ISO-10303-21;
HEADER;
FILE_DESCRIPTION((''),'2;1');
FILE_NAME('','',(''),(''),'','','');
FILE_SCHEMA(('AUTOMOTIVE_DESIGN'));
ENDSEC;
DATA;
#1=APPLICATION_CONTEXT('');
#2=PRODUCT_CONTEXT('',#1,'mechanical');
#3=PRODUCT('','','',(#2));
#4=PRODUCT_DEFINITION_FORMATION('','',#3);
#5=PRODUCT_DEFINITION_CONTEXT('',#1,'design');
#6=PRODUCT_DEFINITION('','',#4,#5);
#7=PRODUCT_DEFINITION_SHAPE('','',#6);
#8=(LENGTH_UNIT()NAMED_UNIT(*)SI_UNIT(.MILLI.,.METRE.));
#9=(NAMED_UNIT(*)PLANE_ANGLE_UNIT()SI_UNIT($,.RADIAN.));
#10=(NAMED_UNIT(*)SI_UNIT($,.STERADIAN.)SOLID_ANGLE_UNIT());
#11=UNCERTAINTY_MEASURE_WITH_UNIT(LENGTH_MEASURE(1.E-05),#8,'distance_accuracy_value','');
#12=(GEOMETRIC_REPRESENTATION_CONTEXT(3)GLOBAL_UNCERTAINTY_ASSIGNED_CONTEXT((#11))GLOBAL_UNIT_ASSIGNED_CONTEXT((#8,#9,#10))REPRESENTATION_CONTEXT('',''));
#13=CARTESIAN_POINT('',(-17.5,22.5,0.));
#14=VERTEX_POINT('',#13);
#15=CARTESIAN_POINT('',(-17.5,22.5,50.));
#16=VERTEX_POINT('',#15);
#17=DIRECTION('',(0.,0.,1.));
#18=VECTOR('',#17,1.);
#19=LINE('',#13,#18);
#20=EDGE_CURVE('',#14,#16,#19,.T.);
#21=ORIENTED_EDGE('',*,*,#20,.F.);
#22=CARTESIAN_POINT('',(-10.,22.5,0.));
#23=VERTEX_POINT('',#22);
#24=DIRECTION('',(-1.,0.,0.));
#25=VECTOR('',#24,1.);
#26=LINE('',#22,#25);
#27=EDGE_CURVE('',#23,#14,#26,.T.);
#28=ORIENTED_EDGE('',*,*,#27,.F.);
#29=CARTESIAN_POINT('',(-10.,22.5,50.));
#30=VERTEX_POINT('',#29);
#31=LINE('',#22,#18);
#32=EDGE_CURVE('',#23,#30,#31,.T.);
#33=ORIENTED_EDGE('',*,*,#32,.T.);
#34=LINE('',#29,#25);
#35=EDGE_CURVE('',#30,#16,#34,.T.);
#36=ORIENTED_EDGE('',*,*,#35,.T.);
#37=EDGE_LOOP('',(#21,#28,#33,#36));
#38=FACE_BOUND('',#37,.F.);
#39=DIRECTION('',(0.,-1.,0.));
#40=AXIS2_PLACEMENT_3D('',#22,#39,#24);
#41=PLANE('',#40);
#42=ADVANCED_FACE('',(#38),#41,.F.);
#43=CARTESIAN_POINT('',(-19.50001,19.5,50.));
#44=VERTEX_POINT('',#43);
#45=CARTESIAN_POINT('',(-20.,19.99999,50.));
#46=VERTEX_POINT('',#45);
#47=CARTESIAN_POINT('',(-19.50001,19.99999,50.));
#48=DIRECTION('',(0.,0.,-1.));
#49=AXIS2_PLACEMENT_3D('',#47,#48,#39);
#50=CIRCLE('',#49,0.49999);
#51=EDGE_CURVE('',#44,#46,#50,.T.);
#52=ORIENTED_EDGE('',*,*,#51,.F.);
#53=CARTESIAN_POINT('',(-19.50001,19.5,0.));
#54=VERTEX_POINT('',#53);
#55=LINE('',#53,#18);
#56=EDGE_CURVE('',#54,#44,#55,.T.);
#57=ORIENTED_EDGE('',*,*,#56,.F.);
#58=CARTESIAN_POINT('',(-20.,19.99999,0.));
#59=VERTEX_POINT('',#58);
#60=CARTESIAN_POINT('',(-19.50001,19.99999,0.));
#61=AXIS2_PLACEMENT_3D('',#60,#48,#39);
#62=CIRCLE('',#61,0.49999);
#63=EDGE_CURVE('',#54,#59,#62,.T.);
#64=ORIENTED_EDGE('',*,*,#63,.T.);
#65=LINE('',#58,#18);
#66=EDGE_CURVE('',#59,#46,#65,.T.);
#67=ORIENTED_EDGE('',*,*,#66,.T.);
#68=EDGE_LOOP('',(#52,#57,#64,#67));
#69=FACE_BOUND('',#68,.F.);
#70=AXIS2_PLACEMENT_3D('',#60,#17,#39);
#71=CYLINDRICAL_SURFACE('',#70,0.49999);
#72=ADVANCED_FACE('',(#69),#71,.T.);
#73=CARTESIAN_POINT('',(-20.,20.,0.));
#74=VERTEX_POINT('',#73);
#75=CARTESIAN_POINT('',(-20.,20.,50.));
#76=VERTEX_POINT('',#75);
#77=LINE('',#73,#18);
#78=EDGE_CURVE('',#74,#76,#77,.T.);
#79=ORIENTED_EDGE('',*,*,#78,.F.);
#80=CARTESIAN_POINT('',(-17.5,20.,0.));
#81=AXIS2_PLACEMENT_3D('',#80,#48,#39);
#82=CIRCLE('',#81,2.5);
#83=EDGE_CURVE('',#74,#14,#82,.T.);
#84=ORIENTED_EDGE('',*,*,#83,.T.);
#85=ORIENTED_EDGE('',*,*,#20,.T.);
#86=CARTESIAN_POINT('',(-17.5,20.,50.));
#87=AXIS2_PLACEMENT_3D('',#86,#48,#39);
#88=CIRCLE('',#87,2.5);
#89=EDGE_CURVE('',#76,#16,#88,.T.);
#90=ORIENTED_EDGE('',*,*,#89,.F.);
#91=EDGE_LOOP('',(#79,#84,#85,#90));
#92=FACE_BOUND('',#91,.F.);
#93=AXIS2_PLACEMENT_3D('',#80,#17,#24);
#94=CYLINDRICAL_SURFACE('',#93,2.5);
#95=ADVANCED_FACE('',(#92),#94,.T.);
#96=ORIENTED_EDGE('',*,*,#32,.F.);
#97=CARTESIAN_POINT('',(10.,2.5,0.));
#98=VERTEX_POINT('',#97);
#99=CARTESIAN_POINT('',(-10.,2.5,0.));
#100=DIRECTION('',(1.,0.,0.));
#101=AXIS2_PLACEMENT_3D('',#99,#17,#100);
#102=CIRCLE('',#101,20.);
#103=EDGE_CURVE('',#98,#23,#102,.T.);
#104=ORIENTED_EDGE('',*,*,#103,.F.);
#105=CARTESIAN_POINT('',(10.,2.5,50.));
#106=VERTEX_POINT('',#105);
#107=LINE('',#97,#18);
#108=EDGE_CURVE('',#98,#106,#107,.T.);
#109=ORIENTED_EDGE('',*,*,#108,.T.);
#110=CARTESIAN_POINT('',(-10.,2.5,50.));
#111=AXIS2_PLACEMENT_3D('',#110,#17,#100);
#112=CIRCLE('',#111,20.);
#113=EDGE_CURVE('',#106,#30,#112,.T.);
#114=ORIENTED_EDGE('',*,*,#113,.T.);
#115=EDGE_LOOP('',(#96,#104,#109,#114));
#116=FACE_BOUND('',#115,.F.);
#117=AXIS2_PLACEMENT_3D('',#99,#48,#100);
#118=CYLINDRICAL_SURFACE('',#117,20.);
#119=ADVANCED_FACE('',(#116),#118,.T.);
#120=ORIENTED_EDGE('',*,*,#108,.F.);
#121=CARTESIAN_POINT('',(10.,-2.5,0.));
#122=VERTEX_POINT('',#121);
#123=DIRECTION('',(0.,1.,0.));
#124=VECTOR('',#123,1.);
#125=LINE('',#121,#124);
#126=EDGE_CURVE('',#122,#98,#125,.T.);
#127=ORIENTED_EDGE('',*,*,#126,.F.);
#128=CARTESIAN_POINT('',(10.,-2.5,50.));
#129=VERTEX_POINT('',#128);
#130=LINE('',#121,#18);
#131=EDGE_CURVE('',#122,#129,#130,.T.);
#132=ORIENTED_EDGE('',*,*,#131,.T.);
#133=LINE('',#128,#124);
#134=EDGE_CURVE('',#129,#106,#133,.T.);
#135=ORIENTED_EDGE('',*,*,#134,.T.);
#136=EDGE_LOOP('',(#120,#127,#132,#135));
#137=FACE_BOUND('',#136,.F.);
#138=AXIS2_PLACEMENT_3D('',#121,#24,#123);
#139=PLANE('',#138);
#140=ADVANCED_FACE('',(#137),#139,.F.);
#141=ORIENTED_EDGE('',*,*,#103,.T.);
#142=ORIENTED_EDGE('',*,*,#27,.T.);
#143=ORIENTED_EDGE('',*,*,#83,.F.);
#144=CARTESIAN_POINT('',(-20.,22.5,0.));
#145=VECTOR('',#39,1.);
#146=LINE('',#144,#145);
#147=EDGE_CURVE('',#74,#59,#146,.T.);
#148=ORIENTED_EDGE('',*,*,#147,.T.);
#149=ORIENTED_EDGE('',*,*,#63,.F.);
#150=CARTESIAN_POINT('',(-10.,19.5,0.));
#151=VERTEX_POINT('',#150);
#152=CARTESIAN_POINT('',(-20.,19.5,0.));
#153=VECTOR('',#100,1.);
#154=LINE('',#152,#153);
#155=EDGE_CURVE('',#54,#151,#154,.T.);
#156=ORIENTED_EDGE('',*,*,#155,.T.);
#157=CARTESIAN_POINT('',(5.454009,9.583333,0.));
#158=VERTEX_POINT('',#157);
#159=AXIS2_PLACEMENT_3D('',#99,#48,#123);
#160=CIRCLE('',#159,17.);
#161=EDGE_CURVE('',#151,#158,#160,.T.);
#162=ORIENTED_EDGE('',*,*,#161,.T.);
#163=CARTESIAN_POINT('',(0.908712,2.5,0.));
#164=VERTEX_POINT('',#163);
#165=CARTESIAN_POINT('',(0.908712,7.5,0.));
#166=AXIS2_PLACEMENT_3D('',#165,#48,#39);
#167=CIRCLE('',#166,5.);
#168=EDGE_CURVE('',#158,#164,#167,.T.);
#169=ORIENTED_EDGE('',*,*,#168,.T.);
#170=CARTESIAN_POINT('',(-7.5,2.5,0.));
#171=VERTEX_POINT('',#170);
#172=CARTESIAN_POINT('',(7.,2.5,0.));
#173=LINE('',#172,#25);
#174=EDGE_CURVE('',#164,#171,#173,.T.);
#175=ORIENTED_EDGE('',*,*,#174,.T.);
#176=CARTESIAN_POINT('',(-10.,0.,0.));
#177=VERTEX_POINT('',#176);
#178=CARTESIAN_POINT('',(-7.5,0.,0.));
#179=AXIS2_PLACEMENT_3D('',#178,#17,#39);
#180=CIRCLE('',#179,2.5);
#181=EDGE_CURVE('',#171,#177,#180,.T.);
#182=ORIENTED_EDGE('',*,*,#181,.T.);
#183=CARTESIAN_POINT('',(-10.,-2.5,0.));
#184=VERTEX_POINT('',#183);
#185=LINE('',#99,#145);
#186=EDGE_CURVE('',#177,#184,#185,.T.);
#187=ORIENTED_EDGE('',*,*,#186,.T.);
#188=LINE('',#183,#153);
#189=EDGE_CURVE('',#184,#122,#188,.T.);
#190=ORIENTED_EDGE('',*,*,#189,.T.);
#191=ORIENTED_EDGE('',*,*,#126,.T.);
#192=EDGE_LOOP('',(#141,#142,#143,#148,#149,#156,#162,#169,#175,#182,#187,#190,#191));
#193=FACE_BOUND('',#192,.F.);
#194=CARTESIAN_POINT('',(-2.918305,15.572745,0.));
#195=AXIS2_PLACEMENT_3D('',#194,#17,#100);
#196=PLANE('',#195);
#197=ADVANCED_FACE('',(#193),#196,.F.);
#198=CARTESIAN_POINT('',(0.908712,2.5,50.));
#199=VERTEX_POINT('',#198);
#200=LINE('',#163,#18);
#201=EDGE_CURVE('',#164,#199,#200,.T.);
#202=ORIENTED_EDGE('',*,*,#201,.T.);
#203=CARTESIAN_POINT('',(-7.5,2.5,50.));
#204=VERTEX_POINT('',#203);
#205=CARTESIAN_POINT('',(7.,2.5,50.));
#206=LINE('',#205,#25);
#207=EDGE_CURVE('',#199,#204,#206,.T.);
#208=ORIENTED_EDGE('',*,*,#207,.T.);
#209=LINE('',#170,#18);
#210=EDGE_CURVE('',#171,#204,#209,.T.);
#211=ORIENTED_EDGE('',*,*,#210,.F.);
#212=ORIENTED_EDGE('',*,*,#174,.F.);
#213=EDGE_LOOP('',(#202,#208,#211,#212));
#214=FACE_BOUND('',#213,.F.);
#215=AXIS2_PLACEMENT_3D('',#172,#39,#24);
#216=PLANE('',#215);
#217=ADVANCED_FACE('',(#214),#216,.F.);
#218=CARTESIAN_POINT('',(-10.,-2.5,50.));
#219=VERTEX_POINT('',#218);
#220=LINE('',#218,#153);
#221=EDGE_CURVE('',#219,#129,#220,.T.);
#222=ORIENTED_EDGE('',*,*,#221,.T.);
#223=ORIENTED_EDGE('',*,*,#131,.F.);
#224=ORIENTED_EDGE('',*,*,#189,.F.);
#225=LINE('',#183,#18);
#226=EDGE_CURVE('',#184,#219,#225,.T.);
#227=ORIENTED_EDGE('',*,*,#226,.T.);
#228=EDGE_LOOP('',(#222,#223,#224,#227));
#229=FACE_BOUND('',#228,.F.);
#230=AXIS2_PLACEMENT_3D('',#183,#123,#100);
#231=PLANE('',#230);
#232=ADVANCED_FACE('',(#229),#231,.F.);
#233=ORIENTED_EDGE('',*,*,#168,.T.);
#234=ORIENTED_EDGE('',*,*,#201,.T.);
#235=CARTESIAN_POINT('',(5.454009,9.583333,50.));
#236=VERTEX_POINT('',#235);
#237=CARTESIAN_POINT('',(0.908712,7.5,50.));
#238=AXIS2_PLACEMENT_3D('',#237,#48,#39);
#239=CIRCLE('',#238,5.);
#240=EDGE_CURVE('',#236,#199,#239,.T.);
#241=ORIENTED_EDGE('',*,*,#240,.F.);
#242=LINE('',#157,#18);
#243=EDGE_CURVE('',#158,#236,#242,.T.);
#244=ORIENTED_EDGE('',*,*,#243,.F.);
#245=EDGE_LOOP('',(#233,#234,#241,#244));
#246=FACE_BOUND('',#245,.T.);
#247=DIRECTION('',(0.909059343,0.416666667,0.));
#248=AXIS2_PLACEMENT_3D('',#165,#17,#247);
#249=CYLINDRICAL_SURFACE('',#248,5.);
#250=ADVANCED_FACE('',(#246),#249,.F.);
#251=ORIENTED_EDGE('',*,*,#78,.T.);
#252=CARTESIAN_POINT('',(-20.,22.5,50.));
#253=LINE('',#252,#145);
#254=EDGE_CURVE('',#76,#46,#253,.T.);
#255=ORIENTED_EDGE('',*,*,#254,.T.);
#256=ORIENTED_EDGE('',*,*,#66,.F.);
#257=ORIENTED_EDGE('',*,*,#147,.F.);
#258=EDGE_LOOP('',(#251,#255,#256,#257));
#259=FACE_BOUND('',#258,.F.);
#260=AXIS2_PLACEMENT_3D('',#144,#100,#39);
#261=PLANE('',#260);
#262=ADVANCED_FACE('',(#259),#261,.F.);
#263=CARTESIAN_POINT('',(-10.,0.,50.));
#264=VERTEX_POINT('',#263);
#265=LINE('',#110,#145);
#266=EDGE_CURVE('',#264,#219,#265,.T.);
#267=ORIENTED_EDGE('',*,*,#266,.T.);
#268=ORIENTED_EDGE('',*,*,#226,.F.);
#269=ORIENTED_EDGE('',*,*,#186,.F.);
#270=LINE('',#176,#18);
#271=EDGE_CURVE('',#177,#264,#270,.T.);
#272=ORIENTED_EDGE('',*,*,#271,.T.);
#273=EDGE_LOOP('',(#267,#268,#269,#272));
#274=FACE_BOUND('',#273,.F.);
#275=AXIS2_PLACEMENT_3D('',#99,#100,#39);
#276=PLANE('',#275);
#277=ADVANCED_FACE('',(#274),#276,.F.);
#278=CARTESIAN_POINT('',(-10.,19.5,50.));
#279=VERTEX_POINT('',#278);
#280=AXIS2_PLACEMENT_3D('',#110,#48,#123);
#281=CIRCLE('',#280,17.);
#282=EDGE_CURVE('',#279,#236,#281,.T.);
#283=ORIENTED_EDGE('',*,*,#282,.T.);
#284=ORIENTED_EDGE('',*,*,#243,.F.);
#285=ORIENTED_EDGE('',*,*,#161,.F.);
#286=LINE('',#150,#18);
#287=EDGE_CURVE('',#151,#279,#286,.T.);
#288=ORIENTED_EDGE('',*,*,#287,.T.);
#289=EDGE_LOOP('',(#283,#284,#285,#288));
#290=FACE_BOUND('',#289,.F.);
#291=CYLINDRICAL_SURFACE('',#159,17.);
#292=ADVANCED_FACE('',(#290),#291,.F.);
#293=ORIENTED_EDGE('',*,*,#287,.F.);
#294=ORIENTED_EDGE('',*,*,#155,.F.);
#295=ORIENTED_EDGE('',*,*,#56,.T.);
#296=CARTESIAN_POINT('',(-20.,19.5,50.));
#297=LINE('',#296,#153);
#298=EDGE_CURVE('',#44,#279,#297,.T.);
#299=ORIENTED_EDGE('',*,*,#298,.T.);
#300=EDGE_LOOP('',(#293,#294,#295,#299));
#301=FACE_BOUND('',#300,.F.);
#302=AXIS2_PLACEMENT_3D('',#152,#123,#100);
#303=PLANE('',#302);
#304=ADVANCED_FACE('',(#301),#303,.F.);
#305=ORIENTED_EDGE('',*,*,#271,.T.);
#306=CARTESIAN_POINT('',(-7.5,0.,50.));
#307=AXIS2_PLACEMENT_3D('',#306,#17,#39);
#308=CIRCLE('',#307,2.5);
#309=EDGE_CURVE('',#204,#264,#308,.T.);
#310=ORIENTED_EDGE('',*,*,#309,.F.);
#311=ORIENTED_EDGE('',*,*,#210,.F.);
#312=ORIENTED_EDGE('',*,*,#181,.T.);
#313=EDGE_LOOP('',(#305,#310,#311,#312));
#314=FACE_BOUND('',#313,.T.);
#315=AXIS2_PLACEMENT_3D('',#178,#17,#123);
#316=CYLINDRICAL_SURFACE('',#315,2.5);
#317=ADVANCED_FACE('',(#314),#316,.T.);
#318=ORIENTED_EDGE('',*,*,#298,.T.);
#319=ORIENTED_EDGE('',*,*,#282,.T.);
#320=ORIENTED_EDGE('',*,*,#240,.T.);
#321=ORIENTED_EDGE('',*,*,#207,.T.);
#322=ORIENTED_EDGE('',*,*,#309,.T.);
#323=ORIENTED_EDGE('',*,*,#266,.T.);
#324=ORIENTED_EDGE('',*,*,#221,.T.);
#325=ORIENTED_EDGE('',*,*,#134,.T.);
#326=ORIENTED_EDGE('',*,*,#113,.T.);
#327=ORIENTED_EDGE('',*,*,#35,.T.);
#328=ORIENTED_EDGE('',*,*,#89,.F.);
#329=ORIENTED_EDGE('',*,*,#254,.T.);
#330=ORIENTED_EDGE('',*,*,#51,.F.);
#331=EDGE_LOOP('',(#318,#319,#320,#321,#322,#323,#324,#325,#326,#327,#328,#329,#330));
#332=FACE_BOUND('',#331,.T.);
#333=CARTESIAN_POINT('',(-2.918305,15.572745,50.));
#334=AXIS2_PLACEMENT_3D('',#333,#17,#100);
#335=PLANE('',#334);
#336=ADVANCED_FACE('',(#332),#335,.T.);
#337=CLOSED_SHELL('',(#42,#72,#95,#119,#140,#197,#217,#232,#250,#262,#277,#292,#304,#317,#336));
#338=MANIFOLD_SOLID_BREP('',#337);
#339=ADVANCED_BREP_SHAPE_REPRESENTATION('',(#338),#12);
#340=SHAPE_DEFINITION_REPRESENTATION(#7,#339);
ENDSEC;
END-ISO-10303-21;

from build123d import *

# Parameters (mm, degrees)
F1_DEPTH = 50
F2_R     = 5
F3_R     = 2.5
F4_R     = 0.49999


# Not quite as in the source:
# - a fillet or chamfer is up to 0.001 mm smaller than in the source, because OpenCascade refuses the exact size


with BuildPart() as f1:
    # F0 (on Top) → F1 (new body)
    with BuildSketch(Plane.XY):
        with BuildLine():
            Line((7, 2.5), (10, 2.5))
            ThreePointArc((10, 2.5), (4.1421356237, 16.6421356237), (-10, 22.5))
            Line((-10, 22.5), (-20, 22.5))
            Line((-20, 22.5), (-20, 19.5))
            Line((-20, 19.5), (-10, 19.5))
            ThreePointArc((-10, 19.5), (2.0208152802, 14.5208152802), (7, 2.5))
        make_face()
        Polygon((-10, -2.5), (10, -2.5), (10, 2.5), (7, 2.5), (-10, 2.5), align=None)
    extrude(amount=F1_DEPTH)

    # F2
    f2_edges = [f1.edges().sort_by_distance(p)[0] for p in [
        (7, 2.5, 25),
    ]]
    fillet(f2_edges, radius=F2_R)

    # F3
    f3_edges = [f1.edges().sort_by_distance(p)[0] for p in [
        (-20, 22.5, 25),
        (-10, 2.5, 25),
    ]]
    fillet(f3_edges, radius=F3_R)

    # F4 (radius 0.5 in the source; OpenCascade refuses exactly that, so slightly less here)
    f4_edges = [f1.edges().sort_by_distance(p)[0] for p in [
        (-20, 19.5, 25),
    ]]
    fillet(f4_edges, radius=F4_R)


solid = f1.part
